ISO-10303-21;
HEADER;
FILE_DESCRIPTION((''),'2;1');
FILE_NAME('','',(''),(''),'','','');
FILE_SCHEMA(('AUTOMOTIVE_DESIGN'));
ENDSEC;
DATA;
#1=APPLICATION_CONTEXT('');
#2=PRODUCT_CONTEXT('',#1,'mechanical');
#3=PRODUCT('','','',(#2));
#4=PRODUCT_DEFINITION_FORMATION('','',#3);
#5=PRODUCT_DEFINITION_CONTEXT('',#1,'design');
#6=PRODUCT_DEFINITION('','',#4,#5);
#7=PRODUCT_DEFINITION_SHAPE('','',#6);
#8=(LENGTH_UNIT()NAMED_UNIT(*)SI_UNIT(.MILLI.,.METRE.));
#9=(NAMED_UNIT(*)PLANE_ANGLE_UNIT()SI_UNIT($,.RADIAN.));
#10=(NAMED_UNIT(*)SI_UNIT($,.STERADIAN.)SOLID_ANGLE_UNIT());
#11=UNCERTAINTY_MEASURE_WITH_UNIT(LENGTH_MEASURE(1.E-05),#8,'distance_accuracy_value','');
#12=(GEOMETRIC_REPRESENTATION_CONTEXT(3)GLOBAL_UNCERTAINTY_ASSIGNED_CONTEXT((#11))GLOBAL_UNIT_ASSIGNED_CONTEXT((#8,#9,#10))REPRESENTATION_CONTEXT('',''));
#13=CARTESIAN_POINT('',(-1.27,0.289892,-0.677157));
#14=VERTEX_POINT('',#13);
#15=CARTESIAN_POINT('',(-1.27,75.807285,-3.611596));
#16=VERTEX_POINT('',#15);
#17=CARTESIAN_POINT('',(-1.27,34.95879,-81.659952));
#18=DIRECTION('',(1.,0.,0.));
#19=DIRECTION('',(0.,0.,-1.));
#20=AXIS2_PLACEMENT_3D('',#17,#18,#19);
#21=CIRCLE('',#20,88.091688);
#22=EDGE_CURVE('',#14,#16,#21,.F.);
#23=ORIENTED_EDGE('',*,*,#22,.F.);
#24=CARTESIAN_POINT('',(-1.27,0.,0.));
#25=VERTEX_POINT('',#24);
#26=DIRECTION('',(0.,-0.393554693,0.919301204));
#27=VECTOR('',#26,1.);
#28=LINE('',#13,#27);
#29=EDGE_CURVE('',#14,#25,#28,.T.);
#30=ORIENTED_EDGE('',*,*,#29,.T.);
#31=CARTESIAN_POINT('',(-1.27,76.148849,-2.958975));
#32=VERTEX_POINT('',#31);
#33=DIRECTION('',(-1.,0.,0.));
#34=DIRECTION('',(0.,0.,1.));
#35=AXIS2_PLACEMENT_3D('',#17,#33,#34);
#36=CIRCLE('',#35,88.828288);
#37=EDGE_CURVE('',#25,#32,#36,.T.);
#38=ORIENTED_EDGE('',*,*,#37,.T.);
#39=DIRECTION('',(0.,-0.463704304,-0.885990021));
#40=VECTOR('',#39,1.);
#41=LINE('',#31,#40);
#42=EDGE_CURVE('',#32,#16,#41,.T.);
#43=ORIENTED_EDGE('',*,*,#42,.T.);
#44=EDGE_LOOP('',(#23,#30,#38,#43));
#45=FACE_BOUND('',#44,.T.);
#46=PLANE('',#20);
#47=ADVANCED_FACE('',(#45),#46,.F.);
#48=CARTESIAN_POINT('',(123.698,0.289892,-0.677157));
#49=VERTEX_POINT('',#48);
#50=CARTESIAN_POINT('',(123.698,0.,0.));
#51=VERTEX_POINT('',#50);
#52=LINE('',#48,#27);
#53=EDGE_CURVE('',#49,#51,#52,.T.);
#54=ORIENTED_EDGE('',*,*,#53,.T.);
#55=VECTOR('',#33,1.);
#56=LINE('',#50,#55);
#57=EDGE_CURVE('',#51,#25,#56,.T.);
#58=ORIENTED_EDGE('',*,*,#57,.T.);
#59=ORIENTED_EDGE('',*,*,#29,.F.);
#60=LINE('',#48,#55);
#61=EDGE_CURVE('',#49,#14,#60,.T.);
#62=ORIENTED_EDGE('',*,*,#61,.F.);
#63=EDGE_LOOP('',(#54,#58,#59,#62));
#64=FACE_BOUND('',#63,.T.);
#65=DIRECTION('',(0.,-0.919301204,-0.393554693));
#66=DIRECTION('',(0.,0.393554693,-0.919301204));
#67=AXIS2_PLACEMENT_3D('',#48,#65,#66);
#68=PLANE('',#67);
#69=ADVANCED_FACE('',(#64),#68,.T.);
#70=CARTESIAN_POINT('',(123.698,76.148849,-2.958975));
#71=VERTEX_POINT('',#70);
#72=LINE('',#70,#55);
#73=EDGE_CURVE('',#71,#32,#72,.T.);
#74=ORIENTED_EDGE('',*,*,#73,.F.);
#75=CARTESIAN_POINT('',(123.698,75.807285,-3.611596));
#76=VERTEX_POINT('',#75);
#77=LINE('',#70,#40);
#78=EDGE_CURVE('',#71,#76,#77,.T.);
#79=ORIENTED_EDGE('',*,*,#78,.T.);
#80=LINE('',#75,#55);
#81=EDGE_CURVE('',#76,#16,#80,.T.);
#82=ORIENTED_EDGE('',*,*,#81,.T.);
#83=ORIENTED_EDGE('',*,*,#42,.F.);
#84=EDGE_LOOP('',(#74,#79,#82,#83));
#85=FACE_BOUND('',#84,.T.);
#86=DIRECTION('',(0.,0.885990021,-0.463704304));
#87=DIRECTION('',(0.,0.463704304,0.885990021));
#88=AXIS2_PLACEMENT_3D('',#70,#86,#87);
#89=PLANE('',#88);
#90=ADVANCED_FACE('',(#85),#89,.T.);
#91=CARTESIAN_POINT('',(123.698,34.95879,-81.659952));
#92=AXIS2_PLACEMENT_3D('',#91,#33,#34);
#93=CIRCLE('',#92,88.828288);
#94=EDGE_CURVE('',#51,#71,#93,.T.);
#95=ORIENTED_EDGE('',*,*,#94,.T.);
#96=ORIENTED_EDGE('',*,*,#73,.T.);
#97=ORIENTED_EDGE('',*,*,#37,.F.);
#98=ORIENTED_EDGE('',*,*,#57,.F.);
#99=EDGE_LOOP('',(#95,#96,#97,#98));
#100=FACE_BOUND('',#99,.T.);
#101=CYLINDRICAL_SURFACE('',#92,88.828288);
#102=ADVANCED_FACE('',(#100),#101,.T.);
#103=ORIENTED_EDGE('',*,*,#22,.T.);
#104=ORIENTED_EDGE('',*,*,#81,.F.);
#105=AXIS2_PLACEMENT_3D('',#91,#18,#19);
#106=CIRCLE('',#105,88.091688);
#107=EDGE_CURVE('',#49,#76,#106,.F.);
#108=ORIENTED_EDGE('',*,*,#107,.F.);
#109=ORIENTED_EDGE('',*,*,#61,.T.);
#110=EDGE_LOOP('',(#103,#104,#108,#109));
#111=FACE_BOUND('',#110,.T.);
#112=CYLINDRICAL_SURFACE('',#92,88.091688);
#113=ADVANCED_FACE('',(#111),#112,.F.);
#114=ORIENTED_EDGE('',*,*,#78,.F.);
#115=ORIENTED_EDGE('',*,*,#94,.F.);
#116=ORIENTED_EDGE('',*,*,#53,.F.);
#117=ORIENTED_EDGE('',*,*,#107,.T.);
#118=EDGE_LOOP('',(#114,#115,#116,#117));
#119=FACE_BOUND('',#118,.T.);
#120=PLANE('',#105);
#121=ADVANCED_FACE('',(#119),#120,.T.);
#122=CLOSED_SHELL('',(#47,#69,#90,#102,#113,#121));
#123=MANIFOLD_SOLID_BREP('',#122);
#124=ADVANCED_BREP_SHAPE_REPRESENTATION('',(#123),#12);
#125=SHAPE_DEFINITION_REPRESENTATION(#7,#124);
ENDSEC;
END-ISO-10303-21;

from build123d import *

# Parameters (mm, degrees)
BASE_FLANGE1_DEPTH      = 123.698
BASE_FLANGE1_DEPTH_BACK = 1.27


# Sheet-metal steps are written as plain solids
with BuildPart() as part:
    # Sketch2 → Base-Flange1 (new, two sides: drawn at the far end of the back side and taken through both)
    with BuildSketch(Plane(origin=(0, 0, 0), x_dir=(0, 0, -1), z_dir=(1, 0, 0)).offset(-BASE_FLANGE1_DEPTH_BACK)):
        with BuildLine():
            ThreePointArc((0, 0), (-7.101349637, 38.407856923), (2.958975316, 76.148849252))
            Line((2.958975316, 76.148849252), (3.611595566, 75.807284661))
            ThreePointArc((3.611595566, 75.807284661), (-6.365305114, 38.379255866), (0.677157267, 0.289892387))
            Line((0.677157267, 0.289892387), (0, 0))
        make_face()
    extrude(amount=BASE_FLANGE1_DEPTH + BASE_FLANGE1_DEPTH_BACK)


solid = part.part
